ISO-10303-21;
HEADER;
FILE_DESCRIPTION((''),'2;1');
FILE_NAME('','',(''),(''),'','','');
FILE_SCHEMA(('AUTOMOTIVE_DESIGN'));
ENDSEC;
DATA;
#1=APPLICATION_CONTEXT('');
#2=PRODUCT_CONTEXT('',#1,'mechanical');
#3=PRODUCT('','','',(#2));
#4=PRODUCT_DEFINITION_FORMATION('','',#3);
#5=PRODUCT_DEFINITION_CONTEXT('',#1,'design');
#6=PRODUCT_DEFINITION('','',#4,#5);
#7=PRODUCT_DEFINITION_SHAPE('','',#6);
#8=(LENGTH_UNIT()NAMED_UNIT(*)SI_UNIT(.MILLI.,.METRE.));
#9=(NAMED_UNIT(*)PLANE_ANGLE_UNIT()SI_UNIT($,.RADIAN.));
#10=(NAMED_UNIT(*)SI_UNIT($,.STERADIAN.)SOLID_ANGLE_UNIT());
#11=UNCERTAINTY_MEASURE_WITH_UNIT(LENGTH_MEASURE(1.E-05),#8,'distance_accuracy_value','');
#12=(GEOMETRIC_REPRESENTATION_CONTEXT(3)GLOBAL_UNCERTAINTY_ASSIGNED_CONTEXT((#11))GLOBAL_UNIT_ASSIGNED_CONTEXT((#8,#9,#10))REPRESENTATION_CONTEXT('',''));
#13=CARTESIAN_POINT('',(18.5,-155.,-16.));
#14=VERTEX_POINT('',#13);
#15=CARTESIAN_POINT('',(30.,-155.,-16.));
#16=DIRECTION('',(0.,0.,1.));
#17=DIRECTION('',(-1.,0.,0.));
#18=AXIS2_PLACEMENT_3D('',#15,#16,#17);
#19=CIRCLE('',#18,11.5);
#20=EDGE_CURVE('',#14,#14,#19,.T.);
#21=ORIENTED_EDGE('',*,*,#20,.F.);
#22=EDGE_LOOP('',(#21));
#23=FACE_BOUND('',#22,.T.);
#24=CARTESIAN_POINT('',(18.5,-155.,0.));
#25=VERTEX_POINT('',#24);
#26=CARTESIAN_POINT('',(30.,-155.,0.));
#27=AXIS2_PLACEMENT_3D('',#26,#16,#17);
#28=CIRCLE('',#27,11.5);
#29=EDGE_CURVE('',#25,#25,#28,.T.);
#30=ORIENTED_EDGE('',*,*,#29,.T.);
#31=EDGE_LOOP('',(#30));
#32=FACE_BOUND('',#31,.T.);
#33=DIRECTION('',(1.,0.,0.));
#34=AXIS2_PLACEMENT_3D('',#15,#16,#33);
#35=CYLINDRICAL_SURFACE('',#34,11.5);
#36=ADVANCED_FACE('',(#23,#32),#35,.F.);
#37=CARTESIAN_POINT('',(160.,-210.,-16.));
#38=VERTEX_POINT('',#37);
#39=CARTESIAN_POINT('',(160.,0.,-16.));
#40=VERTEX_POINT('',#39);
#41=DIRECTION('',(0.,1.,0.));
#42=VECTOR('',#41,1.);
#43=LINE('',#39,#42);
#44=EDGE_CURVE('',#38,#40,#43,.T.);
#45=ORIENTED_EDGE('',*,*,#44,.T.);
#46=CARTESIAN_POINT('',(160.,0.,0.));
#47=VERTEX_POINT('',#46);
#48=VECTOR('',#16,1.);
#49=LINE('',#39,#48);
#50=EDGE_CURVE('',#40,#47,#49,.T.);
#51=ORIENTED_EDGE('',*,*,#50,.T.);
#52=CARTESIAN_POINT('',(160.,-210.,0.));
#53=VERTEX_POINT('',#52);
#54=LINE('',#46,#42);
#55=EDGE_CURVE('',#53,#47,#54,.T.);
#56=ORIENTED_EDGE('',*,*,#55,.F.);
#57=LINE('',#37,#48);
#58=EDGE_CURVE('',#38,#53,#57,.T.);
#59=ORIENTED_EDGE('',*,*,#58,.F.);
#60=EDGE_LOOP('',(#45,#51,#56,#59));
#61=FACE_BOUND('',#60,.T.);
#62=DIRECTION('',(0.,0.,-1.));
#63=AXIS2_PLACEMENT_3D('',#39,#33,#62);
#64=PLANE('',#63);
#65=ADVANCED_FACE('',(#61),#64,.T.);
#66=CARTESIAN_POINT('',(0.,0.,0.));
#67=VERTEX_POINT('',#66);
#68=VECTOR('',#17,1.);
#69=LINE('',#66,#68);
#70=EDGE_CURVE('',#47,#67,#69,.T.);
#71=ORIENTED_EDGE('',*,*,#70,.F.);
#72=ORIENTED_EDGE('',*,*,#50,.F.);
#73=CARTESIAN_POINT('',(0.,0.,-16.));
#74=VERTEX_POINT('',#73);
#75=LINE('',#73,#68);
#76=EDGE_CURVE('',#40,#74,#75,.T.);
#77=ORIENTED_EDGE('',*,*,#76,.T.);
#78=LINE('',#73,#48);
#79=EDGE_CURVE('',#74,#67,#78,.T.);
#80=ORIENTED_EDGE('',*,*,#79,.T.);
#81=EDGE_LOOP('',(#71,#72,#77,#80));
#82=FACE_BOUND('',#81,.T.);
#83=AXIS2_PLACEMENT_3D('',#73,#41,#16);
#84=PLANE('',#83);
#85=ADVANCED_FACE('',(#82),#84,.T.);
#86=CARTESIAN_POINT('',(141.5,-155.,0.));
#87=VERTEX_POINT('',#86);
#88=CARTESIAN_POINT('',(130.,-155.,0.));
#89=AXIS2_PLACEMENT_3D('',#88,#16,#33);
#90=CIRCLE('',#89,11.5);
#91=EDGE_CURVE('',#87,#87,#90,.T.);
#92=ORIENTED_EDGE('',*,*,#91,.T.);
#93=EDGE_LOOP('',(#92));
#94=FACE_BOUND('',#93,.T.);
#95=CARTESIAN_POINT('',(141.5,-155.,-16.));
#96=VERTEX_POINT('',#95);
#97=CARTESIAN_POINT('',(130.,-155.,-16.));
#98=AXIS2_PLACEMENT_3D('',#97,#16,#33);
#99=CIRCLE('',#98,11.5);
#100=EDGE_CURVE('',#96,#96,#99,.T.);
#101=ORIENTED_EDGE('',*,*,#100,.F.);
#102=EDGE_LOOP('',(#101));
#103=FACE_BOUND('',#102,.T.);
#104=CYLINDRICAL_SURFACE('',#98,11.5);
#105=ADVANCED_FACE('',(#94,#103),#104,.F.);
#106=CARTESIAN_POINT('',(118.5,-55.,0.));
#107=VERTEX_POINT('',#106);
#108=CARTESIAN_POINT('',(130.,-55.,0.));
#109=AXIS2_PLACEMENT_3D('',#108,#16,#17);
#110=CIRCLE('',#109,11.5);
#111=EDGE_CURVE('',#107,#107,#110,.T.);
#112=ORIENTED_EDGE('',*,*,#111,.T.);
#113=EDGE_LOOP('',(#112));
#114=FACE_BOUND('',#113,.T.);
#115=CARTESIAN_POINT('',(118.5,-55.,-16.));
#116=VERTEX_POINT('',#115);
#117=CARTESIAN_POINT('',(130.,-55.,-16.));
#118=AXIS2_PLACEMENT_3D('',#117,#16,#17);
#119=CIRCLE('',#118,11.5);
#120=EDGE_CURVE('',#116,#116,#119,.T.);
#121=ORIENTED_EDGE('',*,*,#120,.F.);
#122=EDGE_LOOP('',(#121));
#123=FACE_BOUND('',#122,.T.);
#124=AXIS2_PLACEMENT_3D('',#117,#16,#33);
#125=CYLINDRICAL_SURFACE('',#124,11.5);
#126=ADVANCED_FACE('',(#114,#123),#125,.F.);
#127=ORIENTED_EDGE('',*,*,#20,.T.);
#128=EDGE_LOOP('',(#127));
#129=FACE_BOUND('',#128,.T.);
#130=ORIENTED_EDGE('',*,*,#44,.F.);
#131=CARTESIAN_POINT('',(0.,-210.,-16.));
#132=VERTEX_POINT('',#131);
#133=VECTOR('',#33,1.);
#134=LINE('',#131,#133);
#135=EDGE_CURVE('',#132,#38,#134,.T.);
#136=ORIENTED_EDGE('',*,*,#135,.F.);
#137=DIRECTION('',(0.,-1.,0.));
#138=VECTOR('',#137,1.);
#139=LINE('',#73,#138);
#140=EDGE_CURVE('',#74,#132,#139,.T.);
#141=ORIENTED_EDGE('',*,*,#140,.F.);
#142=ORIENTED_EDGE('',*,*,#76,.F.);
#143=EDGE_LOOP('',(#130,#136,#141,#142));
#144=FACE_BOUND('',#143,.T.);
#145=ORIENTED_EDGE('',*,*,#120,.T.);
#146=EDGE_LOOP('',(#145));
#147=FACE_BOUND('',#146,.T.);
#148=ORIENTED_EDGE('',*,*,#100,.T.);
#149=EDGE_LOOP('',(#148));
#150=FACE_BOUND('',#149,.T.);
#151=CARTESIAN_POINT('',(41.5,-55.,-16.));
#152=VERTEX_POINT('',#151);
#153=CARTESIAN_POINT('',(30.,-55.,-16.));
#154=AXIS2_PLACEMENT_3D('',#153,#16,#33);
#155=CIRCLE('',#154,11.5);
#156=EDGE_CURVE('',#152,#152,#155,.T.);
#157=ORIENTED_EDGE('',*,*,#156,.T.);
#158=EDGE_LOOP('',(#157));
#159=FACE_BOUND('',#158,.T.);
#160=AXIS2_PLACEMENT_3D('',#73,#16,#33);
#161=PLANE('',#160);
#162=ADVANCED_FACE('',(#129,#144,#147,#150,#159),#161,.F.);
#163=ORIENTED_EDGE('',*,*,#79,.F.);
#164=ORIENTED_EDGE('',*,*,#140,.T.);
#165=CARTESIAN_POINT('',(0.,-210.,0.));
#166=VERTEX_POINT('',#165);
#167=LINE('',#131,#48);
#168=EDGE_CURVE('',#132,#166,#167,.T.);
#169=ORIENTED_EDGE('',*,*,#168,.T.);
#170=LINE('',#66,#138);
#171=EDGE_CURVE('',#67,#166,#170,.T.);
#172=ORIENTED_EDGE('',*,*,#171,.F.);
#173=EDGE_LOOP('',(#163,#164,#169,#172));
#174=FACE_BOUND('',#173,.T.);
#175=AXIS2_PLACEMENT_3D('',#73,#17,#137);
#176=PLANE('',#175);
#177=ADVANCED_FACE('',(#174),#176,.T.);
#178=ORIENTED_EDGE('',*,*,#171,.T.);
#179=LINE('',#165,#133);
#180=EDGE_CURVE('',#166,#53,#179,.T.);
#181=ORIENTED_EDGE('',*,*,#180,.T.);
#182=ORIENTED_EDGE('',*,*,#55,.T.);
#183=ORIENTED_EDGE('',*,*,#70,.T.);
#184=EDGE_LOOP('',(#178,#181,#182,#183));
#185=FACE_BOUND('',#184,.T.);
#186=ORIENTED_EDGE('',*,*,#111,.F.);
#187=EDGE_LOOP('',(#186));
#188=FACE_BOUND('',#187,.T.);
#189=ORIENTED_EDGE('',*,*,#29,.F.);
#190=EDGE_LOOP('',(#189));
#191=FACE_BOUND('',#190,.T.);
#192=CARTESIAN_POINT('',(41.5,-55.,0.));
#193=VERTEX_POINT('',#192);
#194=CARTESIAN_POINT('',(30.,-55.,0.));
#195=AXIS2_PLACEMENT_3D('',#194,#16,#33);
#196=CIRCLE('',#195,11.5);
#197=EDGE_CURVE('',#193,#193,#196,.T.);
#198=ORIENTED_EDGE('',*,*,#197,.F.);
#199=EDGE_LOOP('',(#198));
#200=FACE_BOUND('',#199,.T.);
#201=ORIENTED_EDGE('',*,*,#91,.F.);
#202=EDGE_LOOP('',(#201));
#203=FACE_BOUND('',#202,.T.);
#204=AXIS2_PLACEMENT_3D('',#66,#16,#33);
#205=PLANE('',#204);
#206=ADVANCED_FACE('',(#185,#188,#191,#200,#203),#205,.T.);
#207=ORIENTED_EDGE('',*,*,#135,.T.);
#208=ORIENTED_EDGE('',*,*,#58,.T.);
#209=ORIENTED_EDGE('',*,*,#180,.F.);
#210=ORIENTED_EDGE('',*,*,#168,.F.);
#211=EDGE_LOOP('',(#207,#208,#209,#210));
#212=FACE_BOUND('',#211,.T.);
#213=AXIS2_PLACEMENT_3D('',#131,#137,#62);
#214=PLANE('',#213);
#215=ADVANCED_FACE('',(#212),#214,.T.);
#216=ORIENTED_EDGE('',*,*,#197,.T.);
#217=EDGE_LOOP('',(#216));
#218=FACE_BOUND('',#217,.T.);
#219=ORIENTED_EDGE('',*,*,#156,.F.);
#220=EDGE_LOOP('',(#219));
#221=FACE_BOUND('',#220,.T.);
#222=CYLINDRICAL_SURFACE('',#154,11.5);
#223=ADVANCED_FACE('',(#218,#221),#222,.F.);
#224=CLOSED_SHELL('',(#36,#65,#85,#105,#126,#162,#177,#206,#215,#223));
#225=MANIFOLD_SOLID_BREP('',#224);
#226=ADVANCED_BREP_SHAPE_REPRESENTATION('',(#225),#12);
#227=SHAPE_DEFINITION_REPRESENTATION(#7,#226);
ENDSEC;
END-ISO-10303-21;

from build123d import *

# Parameters (mm, degrees)
SKETCH_1_W             = 160
SKETCH_1_H             = 210
SKETCH_1_R             = 11.5
SM_BASE_FLANGE_1_DEPTH = 16


# Sheet-metal steps are written as plain solids
with BuildPart() as part:
    # Sketch 1 → Базовая кромка1 (new body)
    with BuildSketch(Plane.XY):
        with Locations((80, -105)):
            Rectangle(SKETCH_1_W, SKETCH_1_H)
        with Locations((30, -55)):
            Circle(SKETCH_1_R, mode=Mode.SUBTRACT)
        with Locations(Location((130, -55, 0), (0, 0, 180))):
            Circle(SKETCH_1_R, mode=Mode.SUBTRACT)
        with Locations((130, -155)):
            Circle(SKETCH_1_R, mode=Mode.SUBTRACT)
        with Locations(Location((30, -155, 0), (0, 0, 180))):
            Circle(SKETCH_1_R, mode=Mode.SUBTRACT)
    extrude(amount=-SM_BASE_FLANGE_1_DEPTH)


solid = part.part
